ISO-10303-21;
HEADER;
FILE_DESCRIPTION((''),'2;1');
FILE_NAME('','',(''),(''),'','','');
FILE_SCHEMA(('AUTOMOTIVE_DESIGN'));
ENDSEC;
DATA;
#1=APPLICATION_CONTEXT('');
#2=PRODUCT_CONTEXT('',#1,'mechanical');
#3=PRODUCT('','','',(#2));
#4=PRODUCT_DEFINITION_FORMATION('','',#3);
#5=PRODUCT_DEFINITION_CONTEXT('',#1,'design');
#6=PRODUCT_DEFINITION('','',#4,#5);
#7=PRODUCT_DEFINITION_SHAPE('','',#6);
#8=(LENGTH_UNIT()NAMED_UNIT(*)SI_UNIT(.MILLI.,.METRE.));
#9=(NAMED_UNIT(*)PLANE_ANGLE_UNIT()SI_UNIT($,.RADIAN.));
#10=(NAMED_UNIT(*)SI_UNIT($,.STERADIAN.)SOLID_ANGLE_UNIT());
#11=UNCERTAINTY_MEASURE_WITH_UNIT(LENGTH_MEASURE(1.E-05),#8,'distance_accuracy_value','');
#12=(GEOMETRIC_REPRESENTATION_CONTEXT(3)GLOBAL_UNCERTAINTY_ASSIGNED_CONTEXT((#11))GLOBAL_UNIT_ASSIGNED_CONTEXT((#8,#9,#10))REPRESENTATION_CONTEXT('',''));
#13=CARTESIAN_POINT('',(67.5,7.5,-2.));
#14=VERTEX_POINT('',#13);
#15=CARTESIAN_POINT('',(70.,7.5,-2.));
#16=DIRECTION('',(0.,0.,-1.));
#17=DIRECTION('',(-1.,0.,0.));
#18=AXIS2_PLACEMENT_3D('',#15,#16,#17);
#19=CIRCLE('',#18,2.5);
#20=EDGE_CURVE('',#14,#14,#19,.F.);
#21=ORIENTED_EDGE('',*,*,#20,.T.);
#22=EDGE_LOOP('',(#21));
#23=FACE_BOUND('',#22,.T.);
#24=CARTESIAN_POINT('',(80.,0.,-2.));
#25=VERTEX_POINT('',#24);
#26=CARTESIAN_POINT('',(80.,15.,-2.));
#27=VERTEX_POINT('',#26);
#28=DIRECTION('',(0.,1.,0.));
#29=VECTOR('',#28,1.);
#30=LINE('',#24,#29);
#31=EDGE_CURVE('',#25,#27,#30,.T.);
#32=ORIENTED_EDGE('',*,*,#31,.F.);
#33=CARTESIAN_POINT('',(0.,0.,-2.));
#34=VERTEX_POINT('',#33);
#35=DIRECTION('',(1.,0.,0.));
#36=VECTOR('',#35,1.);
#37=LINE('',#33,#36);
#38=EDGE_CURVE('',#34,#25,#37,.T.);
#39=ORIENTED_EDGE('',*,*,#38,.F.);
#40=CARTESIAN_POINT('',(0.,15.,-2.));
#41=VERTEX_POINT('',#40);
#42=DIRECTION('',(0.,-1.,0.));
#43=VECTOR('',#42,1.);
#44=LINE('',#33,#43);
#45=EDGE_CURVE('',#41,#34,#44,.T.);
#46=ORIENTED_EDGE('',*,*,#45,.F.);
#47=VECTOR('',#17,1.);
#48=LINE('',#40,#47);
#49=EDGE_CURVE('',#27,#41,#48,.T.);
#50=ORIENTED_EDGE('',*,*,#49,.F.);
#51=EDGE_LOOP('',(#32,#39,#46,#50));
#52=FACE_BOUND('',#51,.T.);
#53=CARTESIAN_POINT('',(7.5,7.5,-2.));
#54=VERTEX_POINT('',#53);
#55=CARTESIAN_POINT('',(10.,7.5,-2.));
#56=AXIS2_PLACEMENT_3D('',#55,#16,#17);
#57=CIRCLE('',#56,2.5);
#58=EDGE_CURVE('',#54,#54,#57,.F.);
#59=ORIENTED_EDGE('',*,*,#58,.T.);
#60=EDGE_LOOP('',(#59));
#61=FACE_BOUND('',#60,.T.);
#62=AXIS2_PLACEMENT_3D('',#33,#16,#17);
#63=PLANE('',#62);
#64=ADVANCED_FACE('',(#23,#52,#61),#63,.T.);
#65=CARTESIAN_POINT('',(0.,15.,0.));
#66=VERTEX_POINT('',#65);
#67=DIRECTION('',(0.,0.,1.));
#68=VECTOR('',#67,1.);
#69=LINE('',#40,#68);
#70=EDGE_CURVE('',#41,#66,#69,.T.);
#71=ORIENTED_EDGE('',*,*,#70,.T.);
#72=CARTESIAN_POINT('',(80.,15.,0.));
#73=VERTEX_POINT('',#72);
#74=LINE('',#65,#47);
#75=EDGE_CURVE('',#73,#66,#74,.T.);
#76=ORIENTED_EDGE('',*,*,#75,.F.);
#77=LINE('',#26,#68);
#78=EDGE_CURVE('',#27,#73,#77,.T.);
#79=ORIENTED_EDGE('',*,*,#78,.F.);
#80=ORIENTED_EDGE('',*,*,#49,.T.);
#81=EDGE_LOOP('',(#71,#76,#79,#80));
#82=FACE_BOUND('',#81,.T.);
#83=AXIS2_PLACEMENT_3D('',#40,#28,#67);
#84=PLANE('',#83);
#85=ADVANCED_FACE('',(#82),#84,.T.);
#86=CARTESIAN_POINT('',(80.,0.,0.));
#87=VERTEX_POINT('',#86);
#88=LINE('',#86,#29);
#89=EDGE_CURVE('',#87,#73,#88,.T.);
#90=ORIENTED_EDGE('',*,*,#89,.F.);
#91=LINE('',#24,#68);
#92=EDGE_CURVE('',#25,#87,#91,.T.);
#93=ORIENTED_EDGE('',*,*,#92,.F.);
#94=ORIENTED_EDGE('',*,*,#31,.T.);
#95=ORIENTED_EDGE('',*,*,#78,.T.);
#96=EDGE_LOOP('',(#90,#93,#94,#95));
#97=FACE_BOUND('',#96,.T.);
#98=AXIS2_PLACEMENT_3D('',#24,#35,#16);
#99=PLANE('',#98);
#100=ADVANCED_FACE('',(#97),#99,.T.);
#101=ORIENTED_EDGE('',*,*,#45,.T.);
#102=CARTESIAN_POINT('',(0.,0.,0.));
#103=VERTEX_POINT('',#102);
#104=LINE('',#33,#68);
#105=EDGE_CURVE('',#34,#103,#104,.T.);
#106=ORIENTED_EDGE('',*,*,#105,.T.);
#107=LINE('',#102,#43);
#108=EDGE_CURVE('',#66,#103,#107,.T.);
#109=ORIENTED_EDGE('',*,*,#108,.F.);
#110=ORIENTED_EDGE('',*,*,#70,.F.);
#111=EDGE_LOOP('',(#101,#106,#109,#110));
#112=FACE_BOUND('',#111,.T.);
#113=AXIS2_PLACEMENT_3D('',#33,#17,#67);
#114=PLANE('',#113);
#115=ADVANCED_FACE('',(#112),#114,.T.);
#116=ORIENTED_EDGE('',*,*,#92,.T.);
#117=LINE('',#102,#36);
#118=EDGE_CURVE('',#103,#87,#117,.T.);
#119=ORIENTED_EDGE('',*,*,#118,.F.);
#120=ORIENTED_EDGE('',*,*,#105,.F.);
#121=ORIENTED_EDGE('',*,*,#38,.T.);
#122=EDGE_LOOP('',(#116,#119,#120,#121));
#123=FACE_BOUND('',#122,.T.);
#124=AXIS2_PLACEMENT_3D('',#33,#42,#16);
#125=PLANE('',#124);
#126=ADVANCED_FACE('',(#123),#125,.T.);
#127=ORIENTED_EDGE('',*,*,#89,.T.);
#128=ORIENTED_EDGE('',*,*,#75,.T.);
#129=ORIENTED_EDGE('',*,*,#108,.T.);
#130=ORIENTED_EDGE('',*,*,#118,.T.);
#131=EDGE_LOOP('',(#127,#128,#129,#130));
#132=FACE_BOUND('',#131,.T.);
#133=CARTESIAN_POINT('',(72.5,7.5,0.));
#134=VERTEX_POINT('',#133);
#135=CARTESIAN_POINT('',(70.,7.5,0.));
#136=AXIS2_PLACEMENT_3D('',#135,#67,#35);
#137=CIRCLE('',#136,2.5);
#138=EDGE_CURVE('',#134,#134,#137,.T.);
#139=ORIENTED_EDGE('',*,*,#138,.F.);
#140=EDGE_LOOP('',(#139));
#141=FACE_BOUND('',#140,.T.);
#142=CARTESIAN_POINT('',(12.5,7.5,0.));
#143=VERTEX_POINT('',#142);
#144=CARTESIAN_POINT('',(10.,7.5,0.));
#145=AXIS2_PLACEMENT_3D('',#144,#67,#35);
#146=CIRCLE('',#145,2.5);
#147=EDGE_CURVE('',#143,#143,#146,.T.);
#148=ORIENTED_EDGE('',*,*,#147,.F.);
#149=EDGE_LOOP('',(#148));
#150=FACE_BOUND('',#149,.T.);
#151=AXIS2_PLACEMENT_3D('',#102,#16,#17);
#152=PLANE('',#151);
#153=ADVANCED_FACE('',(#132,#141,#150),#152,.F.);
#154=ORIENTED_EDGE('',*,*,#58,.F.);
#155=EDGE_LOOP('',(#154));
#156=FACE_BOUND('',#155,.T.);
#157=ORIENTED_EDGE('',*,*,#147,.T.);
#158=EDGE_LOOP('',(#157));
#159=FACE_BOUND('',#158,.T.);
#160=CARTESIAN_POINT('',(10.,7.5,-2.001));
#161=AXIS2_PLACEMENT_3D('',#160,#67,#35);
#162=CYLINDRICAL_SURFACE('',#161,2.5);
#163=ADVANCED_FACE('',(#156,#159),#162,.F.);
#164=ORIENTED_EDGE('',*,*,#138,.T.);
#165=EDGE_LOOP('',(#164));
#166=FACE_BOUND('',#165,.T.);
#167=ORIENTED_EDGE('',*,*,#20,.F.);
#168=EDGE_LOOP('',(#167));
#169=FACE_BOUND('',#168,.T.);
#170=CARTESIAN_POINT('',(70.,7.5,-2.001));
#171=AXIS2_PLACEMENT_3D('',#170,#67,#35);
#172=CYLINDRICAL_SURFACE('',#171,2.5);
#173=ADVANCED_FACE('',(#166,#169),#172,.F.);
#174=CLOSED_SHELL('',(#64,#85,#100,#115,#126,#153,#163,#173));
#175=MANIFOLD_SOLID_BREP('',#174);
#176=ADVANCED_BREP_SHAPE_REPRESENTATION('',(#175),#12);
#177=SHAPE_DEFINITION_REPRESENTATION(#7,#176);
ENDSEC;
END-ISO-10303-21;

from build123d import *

# Parameters (mm, degrees)
SKETCH1_W          = 80
SKETCH1_H          = 15
BASE_FLANGE1_DEPTH = 2
CUT_EXTRUDE1_REACH = 83.419
SKETCH6_R          = 2.5


# Sheet-metal steps are written as plain solids
with BuildPart() as part:
    # Sketch1 → Base-Flange1 (new body)
    with BuildSketch(Plane.XY):
        with Locations((40, 7.5)):
            Rectangle(SKETCH1_W, SKETCH1_H)
    extrude(amount=-BASE_FLANGE1_DEPTH)

    # Sketch6 → Cut-Extrude1 (cut, up to next)
    with BuildSketch(Plane.XY, mode=Mode.PRIVATE) as cut_extrude1_sk1:
        with Locations((10, 7.5)):
            Circle(SKETCH6_R)
    cut_extrude1_tool1 = extrude(cut_extrude1_sk1.sketch, amount=-CUT_EXTRUDE1_REACH, mode=Mode.PRIVATE) & part.part
    # Sketch6 → Cut-Extrude1 (cut, up to next)
    with BuildSketch(Plane.XY, mode=Mode.PRIVATE) as cut_extrude1_sk2:
        with Locations((70, 7.5)):
            Circle(SKETCH6_R)
    cut_extrude1_tool2 = extrude(cut_extrude1_sk2.sketch, amount=-CUT_EXTRUDE1_REACH, mode=Mode.PRIVATE) & part.part
    add(cut_extrude1_tool1.solids().sort_by_distance((10, 7.5, 0))[0], mode=Mode.SUBTRACT)
    add(cut_extrude1_tool2.solids().sort_by_distance((70, 7.5, 0))[0], mode=Mode.SUBTRACT)


solid = part.part
